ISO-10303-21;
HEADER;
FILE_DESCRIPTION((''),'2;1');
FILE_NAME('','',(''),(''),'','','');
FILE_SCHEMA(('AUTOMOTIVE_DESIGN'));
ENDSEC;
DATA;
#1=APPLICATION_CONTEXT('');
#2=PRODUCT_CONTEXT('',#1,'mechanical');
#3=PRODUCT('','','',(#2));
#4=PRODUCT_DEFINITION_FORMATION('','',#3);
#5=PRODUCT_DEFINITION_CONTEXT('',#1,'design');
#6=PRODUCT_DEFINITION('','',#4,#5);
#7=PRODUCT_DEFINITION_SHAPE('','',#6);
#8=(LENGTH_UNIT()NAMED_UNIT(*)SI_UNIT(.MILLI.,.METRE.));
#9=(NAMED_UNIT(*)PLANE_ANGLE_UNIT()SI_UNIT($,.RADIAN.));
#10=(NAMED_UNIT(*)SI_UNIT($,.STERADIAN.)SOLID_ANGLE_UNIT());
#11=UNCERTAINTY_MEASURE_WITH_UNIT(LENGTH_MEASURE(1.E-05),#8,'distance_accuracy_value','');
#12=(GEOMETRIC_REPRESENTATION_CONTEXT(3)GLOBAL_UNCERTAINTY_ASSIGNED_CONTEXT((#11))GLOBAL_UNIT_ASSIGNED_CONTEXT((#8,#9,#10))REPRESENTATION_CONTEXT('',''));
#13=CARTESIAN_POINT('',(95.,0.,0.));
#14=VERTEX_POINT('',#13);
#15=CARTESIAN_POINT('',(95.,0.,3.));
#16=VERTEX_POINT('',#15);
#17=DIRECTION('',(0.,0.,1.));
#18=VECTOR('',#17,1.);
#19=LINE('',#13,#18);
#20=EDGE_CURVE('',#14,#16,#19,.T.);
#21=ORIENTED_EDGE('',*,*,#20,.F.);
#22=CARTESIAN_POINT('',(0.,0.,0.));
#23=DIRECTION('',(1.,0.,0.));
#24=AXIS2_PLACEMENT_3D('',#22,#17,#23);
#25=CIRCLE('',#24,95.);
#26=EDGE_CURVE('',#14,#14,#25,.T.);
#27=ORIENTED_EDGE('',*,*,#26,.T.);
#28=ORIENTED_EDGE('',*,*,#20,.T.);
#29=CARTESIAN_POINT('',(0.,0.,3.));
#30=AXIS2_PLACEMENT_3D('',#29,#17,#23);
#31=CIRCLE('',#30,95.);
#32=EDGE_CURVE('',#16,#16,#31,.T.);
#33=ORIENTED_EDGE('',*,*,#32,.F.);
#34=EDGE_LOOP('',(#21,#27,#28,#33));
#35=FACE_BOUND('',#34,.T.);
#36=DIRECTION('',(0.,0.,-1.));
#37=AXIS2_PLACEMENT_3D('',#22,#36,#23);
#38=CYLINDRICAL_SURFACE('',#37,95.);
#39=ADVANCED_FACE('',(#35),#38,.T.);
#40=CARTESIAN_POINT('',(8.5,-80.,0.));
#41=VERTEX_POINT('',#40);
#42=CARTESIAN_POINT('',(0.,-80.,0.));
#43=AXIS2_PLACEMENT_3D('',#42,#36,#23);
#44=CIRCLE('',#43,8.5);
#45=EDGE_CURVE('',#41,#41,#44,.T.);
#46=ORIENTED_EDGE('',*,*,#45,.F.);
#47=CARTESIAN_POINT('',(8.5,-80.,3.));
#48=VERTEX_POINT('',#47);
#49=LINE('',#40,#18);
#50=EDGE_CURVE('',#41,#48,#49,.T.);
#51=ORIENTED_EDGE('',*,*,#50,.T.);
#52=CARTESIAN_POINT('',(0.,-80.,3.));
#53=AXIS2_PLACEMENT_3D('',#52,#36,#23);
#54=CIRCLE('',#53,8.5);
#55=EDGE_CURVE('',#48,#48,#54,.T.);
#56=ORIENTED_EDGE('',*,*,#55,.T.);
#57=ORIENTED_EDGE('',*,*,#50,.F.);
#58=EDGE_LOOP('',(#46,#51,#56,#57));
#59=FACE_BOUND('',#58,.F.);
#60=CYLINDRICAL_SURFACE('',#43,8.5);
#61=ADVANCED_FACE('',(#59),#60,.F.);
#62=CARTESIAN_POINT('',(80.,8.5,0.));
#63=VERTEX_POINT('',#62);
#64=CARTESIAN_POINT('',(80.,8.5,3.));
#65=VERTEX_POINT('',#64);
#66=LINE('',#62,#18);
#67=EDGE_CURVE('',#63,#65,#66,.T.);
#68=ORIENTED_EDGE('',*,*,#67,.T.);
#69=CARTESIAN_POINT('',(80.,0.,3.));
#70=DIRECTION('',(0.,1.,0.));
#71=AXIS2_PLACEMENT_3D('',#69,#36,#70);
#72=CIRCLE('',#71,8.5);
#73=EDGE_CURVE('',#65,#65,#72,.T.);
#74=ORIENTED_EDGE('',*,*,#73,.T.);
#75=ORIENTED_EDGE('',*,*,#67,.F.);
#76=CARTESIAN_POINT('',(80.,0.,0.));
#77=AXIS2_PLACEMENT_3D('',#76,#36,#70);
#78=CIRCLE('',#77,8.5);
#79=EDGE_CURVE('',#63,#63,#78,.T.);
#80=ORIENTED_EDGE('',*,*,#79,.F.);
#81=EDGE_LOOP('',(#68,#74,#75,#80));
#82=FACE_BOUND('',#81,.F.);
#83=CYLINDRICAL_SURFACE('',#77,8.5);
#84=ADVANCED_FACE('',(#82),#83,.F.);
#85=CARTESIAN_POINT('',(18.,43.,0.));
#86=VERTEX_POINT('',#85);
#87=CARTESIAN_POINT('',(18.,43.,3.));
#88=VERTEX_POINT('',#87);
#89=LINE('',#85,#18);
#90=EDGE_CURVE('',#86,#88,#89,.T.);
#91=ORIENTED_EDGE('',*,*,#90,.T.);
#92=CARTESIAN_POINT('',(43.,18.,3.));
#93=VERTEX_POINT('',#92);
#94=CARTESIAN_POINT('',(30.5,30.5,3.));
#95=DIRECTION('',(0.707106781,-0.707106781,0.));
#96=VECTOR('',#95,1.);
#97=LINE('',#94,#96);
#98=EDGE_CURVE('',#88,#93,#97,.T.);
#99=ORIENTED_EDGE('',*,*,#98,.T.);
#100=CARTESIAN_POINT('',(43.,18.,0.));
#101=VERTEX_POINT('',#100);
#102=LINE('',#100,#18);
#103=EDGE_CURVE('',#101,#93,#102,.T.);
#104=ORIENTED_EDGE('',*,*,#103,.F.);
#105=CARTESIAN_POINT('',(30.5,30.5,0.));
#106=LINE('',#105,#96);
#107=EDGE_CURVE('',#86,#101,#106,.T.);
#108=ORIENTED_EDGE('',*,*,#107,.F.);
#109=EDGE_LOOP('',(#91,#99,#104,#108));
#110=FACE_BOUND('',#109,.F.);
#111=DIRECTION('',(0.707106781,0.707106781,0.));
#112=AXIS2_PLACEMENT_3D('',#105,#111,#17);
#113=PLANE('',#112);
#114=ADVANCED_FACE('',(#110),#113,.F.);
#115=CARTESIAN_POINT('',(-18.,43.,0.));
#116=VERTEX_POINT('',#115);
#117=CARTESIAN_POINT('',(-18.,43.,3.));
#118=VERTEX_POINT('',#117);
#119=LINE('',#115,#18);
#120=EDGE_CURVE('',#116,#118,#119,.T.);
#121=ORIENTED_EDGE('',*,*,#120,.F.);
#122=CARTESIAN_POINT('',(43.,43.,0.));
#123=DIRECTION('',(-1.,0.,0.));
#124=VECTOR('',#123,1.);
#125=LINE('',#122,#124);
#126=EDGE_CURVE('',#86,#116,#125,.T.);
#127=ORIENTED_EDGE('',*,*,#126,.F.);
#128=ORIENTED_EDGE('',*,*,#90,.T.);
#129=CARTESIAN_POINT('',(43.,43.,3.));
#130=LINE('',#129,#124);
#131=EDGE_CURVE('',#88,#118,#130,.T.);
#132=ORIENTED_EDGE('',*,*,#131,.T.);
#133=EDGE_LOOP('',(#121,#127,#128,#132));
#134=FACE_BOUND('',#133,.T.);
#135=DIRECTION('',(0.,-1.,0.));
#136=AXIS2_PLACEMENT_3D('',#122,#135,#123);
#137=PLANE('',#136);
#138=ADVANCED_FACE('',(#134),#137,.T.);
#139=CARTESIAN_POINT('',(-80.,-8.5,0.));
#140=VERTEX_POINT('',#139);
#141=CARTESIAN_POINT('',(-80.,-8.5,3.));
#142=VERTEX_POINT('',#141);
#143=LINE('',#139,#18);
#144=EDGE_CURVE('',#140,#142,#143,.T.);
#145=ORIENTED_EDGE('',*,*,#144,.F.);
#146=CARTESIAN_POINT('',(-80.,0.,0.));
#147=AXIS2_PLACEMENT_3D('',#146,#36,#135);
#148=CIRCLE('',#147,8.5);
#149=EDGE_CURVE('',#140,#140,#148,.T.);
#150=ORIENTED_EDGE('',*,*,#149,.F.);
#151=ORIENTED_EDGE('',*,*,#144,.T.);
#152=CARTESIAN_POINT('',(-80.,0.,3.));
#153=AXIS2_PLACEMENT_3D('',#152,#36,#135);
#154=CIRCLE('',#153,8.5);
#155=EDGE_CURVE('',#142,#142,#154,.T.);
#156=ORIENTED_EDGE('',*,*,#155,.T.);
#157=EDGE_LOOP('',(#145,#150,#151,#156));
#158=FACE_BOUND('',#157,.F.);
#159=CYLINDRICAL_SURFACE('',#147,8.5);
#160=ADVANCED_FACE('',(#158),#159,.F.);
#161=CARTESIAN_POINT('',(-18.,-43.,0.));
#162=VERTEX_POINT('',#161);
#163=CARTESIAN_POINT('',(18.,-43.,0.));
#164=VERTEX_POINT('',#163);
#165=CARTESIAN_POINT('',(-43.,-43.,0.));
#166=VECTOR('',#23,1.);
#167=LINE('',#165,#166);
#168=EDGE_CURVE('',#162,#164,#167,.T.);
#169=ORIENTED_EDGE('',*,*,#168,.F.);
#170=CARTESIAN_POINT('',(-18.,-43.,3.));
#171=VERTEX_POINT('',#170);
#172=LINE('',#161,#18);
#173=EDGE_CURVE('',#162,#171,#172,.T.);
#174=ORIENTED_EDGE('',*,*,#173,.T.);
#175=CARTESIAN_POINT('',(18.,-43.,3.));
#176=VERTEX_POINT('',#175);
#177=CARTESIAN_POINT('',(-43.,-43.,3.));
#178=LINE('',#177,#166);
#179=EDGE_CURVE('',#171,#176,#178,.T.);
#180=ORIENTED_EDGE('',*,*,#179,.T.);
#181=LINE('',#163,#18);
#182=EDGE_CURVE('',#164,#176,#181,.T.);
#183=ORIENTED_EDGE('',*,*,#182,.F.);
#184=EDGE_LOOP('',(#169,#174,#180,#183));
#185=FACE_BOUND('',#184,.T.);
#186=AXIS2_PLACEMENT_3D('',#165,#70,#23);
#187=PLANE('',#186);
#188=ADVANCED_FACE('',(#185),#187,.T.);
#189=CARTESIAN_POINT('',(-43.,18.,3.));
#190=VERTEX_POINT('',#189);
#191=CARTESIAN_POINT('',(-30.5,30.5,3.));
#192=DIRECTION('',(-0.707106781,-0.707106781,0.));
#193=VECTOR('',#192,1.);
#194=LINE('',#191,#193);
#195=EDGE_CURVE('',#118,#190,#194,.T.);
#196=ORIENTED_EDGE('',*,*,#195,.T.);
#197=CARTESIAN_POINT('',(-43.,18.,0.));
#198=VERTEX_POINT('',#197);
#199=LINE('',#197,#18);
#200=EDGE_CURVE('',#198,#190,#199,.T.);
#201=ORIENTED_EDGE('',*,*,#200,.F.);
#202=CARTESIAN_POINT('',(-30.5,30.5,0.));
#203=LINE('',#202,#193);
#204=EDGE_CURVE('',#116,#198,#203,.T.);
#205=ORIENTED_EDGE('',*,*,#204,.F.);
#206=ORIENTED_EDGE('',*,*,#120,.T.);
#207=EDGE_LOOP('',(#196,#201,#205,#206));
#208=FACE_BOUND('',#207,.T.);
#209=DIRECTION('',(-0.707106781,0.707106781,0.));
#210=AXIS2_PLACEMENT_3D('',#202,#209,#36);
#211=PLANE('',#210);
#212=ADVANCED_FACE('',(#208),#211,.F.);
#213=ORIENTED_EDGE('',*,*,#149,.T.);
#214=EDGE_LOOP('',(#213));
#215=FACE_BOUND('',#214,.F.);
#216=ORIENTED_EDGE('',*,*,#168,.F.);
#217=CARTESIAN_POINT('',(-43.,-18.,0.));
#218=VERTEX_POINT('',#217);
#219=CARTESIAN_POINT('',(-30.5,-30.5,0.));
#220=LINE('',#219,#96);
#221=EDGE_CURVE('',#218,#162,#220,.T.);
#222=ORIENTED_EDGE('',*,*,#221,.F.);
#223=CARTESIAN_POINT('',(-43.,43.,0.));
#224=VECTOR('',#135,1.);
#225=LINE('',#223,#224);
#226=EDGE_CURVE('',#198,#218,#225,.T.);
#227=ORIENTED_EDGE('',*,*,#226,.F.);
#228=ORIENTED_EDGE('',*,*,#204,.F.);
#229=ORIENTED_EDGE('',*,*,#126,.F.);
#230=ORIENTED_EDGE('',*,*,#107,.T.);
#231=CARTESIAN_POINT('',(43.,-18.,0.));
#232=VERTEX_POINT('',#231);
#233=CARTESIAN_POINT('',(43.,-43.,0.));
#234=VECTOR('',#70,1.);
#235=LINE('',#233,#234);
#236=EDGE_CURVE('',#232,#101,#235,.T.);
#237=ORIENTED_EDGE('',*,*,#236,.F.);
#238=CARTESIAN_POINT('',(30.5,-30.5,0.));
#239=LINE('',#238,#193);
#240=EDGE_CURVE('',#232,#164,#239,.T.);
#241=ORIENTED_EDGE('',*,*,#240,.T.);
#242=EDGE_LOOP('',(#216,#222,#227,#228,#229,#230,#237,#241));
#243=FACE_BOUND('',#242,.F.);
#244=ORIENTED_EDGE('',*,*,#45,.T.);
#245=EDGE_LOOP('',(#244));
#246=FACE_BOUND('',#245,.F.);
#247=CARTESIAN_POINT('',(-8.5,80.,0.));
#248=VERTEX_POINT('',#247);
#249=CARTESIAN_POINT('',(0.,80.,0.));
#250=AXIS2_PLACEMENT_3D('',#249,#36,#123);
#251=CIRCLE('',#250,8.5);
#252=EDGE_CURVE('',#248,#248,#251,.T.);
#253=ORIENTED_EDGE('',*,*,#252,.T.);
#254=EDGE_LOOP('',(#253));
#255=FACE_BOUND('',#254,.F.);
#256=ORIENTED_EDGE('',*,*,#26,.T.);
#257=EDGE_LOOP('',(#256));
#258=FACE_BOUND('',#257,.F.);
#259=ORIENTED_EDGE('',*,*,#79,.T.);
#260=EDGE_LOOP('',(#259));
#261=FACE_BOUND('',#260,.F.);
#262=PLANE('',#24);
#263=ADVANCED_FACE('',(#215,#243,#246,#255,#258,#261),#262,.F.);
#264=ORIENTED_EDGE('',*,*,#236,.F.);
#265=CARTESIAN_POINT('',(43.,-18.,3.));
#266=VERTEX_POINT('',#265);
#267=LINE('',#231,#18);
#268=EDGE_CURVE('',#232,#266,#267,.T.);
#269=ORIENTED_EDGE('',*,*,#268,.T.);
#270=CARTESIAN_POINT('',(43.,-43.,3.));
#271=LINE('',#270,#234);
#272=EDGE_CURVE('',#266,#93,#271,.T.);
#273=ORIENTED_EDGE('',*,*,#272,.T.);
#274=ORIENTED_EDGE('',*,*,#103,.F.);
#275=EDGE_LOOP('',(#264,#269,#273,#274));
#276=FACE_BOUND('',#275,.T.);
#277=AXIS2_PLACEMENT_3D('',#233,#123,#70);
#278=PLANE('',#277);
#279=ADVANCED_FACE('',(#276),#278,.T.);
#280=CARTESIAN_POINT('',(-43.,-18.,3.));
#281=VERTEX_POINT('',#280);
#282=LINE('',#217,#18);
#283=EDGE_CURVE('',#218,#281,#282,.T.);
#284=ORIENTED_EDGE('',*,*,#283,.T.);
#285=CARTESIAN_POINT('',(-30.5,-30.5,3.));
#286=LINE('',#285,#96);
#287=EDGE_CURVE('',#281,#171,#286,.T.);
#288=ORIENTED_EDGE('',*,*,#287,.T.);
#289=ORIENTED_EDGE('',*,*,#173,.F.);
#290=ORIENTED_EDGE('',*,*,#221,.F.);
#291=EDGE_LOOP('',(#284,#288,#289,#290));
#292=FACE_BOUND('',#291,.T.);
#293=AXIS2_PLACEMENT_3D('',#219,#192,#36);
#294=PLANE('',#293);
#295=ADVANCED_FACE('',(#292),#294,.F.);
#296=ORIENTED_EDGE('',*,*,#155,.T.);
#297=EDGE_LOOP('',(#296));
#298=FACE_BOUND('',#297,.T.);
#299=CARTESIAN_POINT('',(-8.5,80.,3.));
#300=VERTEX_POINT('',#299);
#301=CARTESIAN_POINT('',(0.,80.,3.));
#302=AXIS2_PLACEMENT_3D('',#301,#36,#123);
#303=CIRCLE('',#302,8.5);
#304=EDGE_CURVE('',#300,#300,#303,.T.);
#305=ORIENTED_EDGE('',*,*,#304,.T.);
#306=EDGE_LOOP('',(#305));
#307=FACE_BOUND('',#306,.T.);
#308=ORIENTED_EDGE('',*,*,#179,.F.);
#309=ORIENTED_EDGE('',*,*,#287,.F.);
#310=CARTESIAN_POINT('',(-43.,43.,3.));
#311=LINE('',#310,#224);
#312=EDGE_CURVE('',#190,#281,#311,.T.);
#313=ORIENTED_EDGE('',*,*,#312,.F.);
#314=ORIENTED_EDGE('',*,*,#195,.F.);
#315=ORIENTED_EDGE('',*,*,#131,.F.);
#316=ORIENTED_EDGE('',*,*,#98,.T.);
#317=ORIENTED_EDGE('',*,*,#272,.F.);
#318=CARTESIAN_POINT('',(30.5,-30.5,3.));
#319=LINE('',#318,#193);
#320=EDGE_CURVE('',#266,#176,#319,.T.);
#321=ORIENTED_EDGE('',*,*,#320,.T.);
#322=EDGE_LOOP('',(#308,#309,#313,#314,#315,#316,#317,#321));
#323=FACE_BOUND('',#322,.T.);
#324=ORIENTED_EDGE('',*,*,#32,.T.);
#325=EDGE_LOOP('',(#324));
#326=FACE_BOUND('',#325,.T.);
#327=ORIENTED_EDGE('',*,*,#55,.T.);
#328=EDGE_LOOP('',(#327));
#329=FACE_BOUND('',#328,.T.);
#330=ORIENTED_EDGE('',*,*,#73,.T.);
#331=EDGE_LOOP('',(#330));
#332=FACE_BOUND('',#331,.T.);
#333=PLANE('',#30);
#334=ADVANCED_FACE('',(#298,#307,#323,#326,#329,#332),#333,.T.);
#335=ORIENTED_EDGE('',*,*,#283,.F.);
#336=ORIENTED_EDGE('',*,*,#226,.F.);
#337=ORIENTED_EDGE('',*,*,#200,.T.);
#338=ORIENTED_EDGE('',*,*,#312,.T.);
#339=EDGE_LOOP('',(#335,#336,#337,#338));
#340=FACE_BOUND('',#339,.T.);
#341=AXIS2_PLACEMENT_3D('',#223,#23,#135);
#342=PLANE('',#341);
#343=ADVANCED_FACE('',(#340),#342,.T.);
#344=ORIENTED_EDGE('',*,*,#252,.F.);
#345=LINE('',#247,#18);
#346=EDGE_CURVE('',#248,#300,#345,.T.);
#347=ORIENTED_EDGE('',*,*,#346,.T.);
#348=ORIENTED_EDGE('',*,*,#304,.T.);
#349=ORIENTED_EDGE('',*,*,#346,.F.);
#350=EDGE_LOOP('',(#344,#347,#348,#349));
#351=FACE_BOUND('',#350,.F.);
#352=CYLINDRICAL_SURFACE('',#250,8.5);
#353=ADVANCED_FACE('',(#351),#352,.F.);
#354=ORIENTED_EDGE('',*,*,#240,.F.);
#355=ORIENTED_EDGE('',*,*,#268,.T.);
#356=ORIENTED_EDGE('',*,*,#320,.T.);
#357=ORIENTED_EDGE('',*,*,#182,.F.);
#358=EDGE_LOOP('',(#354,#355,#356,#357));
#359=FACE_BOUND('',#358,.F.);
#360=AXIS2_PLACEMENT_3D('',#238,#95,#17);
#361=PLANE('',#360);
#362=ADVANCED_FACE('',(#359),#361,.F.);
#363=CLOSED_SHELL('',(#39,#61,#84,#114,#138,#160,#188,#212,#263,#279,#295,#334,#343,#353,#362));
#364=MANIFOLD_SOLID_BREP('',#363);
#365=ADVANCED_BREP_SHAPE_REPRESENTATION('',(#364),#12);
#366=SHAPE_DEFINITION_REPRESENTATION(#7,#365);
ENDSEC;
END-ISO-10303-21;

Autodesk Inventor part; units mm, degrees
ref_plane "YZ Plane" through (0, 0, 0) normal (1, 0, 0) x (0, 1, 0)
ref_plane "XZ Plane" through (0, 0, 0) normal (0, 1, 0) x (-1, 0, 0)
ref_plane "XY Plane" through (0, 0, 0) normal (0, 0, 1) x (1, 0, 0)
sketch "Sketch1" plane through (0, 0, 0) normal (0, 0, 1) x (1, 0, 0)
  circle A0 centre (0, 0) radius 95
  line L0 (43, 43) -> (-43, 43)
  line L1 (-43, 43) -> (-43, -43)
  line L2 (-43, -43) -> (43, -43)
  line L3 (43, -43) -> (43, 43)
  line L4 (43, 43) -> (-43, -43) construction
  line L5 (-43, 43) -> (43, -43) construction
  dimension "d157" = 190
  dimension "d158" = 86
  dimension "d159" = 86
extrude "Plate5" add sketch "Sketch1" along normal blind 3
sketch "Sketch7" plane through (0, 0, 0) normal (0, 0, -1) x (-1, 0, 0)
  circle A0 centre (0, 80) radius 8.5
  point P0 (0, 0)
  dimension "d160" = 17
  dimension "d161" = 80
extrude "Cut1" cut sketch "Sketch7" against normal blind 3
pattern_circular "Circular Pattern1" count 4 over 360 about axis through (0, 0, -10) along (0, 0, 1) of "Cut1"
chamfer "Corner Chamfer2" distance 25 angle 45 4 edges at (-43, -43, 1.5) (43, -43, 1.5) (-43, 43, 1.5) (43, 43, 1.5)
properties part number "PNS 1792  funnel FLANGE 1200 50-90_1000x90" material "Stainless Steel"
